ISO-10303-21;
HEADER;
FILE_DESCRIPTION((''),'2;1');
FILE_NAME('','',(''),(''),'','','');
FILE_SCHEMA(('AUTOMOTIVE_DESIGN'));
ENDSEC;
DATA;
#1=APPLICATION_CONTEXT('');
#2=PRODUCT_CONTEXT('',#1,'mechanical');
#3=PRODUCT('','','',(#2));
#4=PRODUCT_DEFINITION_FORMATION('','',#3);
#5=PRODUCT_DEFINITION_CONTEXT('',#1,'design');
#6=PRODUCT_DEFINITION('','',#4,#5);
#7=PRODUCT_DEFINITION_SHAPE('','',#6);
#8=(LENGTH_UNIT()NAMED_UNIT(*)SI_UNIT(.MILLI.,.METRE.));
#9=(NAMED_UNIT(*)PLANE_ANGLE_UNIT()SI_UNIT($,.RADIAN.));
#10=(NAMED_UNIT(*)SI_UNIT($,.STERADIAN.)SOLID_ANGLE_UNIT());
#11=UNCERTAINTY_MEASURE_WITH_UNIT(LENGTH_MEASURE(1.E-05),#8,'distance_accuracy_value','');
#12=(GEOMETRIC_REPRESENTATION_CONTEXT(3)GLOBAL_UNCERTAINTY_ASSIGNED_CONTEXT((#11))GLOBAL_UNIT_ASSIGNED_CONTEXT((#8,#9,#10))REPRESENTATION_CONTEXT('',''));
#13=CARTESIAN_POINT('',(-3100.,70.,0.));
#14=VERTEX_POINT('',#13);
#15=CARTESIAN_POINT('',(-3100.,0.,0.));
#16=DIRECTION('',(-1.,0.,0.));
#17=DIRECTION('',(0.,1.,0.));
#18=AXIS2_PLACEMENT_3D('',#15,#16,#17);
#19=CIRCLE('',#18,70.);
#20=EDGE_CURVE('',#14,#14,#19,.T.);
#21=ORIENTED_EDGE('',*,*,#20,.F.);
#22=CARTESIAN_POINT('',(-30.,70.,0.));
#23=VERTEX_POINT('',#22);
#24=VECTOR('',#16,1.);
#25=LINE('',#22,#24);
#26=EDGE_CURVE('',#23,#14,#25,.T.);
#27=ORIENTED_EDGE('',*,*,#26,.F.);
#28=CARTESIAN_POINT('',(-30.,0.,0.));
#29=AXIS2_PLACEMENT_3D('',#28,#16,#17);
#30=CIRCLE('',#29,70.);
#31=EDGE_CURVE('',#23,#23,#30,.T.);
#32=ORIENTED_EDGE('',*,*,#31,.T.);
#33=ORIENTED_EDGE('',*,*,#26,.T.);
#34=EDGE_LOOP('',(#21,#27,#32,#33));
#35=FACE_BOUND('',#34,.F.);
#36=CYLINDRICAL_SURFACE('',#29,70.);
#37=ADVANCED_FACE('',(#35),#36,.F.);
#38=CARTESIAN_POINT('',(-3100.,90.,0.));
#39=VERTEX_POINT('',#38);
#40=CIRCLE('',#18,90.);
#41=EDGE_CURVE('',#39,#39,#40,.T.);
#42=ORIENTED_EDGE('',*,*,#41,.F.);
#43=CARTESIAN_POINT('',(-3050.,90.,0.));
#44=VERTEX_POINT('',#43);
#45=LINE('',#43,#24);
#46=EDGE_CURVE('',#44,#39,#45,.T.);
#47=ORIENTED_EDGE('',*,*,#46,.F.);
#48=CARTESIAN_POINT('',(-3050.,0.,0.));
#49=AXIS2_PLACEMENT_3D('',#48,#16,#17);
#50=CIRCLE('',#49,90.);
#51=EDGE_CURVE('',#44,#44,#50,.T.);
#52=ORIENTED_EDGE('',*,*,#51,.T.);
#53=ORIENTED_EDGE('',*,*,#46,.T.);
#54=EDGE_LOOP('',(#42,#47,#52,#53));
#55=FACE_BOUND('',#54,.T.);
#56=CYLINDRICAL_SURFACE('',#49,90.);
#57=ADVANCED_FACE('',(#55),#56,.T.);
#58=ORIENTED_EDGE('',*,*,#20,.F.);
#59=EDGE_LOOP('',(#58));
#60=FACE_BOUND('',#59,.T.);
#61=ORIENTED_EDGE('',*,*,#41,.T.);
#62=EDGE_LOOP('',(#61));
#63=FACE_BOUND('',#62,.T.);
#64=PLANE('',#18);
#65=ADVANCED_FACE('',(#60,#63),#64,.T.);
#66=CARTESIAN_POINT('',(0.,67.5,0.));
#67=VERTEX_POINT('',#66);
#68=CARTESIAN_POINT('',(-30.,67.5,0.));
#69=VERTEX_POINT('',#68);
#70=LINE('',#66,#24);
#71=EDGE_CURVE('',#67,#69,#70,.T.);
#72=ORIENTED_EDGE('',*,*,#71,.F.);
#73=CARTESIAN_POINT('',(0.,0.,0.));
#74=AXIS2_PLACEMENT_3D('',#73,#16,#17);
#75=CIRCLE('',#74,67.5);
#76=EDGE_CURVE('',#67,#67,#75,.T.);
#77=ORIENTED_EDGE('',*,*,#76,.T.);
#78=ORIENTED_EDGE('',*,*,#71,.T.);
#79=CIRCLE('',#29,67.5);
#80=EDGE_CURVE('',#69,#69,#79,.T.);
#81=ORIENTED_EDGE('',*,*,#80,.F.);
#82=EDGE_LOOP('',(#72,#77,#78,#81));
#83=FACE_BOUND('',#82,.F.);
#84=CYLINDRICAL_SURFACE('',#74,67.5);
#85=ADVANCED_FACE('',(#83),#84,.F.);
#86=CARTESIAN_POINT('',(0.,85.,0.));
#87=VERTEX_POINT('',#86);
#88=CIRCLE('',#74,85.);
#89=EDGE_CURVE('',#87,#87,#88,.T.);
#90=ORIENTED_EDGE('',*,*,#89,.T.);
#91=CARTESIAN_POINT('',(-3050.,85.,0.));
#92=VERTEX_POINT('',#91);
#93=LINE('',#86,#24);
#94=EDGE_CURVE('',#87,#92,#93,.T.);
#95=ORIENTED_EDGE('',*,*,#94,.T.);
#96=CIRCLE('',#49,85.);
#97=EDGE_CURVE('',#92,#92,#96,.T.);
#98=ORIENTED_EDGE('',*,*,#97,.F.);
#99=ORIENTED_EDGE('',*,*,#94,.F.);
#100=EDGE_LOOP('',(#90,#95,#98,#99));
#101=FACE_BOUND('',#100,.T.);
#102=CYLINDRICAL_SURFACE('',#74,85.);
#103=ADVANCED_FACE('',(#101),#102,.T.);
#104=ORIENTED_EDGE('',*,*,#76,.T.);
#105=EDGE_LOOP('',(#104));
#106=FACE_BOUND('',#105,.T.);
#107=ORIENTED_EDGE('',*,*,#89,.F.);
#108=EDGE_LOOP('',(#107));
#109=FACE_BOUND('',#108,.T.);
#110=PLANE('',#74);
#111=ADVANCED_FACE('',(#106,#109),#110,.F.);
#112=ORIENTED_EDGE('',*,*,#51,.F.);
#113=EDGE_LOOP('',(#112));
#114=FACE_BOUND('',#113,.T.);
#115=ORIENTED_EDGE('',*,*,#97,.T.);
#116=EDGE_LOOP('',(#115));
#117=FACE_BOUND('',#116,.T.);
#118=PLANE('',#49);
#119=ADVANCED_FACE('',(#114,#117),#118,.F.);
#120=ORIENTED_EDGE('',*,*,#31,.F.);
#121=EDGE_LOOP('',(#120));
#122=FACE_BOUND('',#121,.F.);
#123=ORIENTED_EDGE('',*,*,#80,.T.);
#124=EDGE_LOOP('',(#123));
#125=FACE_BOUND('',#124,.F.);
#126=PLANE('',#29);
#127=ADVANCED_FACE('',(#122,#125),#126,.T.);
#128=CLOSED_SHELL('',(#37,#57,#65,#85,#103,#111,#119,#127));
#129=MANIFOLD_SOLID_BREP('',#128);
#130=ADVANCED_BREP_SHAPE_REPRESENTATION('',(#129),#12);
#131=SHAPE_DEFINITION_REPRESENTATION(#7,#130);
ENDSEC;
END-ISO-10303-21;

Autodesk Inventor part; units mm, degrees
ref_plane "YZ Plane" through (0, 0, 0) normal (1, 0, 0) x (0, 1, 0)
ref_plane "XZ Plane" through (0, 0, 0) normal (0, 1, 0) x (-1, 0, 0)
ref_plane "XY Plane" through (0, 0, 0) normal (0, 0, 1) x (1, 0, 0)
sketch "Эскиз1" plane through (0, 0, 0) normal (0, 0, 1) x (1, 0, 0)
  line L0 (0, 0) -> (-3944.82, 0)
  line L1 (0, 0) -> (0, 85)
  line L2 (0, 85) -> (-3050, 85)
  line L3 (-3050, 85) -> (-3050, 90)
  line L4 (-3050, 90) -> (-3100, 90)
  line L5 (-3100, 90) -> (-3100, 0)
  line L6 (0, 67.5) -> (-30, 67.5)
  line L7 (-30, 67.5) -> (-30, 70)
  line L8 (-30, 70) -> (-3100, 70)
  dimension "d0" = 135
  dimension "d1" = 30
  dimension "d2" = 140
  dimension "d4" = 50
  dimension "d5" = 180
  dimension "d6" = 170
  dimension "d7" = 3100
revolve "Вращение1" add sketch "Эскиз1" angle 360 about axis through (0, 0, 0) along (-1, 0, 0) contours L6 L7 L8 L5 L4 L3 L2 L1
properties part number "Lift.02.00.00.02" material "Сталь нержавеющая, 440C"
